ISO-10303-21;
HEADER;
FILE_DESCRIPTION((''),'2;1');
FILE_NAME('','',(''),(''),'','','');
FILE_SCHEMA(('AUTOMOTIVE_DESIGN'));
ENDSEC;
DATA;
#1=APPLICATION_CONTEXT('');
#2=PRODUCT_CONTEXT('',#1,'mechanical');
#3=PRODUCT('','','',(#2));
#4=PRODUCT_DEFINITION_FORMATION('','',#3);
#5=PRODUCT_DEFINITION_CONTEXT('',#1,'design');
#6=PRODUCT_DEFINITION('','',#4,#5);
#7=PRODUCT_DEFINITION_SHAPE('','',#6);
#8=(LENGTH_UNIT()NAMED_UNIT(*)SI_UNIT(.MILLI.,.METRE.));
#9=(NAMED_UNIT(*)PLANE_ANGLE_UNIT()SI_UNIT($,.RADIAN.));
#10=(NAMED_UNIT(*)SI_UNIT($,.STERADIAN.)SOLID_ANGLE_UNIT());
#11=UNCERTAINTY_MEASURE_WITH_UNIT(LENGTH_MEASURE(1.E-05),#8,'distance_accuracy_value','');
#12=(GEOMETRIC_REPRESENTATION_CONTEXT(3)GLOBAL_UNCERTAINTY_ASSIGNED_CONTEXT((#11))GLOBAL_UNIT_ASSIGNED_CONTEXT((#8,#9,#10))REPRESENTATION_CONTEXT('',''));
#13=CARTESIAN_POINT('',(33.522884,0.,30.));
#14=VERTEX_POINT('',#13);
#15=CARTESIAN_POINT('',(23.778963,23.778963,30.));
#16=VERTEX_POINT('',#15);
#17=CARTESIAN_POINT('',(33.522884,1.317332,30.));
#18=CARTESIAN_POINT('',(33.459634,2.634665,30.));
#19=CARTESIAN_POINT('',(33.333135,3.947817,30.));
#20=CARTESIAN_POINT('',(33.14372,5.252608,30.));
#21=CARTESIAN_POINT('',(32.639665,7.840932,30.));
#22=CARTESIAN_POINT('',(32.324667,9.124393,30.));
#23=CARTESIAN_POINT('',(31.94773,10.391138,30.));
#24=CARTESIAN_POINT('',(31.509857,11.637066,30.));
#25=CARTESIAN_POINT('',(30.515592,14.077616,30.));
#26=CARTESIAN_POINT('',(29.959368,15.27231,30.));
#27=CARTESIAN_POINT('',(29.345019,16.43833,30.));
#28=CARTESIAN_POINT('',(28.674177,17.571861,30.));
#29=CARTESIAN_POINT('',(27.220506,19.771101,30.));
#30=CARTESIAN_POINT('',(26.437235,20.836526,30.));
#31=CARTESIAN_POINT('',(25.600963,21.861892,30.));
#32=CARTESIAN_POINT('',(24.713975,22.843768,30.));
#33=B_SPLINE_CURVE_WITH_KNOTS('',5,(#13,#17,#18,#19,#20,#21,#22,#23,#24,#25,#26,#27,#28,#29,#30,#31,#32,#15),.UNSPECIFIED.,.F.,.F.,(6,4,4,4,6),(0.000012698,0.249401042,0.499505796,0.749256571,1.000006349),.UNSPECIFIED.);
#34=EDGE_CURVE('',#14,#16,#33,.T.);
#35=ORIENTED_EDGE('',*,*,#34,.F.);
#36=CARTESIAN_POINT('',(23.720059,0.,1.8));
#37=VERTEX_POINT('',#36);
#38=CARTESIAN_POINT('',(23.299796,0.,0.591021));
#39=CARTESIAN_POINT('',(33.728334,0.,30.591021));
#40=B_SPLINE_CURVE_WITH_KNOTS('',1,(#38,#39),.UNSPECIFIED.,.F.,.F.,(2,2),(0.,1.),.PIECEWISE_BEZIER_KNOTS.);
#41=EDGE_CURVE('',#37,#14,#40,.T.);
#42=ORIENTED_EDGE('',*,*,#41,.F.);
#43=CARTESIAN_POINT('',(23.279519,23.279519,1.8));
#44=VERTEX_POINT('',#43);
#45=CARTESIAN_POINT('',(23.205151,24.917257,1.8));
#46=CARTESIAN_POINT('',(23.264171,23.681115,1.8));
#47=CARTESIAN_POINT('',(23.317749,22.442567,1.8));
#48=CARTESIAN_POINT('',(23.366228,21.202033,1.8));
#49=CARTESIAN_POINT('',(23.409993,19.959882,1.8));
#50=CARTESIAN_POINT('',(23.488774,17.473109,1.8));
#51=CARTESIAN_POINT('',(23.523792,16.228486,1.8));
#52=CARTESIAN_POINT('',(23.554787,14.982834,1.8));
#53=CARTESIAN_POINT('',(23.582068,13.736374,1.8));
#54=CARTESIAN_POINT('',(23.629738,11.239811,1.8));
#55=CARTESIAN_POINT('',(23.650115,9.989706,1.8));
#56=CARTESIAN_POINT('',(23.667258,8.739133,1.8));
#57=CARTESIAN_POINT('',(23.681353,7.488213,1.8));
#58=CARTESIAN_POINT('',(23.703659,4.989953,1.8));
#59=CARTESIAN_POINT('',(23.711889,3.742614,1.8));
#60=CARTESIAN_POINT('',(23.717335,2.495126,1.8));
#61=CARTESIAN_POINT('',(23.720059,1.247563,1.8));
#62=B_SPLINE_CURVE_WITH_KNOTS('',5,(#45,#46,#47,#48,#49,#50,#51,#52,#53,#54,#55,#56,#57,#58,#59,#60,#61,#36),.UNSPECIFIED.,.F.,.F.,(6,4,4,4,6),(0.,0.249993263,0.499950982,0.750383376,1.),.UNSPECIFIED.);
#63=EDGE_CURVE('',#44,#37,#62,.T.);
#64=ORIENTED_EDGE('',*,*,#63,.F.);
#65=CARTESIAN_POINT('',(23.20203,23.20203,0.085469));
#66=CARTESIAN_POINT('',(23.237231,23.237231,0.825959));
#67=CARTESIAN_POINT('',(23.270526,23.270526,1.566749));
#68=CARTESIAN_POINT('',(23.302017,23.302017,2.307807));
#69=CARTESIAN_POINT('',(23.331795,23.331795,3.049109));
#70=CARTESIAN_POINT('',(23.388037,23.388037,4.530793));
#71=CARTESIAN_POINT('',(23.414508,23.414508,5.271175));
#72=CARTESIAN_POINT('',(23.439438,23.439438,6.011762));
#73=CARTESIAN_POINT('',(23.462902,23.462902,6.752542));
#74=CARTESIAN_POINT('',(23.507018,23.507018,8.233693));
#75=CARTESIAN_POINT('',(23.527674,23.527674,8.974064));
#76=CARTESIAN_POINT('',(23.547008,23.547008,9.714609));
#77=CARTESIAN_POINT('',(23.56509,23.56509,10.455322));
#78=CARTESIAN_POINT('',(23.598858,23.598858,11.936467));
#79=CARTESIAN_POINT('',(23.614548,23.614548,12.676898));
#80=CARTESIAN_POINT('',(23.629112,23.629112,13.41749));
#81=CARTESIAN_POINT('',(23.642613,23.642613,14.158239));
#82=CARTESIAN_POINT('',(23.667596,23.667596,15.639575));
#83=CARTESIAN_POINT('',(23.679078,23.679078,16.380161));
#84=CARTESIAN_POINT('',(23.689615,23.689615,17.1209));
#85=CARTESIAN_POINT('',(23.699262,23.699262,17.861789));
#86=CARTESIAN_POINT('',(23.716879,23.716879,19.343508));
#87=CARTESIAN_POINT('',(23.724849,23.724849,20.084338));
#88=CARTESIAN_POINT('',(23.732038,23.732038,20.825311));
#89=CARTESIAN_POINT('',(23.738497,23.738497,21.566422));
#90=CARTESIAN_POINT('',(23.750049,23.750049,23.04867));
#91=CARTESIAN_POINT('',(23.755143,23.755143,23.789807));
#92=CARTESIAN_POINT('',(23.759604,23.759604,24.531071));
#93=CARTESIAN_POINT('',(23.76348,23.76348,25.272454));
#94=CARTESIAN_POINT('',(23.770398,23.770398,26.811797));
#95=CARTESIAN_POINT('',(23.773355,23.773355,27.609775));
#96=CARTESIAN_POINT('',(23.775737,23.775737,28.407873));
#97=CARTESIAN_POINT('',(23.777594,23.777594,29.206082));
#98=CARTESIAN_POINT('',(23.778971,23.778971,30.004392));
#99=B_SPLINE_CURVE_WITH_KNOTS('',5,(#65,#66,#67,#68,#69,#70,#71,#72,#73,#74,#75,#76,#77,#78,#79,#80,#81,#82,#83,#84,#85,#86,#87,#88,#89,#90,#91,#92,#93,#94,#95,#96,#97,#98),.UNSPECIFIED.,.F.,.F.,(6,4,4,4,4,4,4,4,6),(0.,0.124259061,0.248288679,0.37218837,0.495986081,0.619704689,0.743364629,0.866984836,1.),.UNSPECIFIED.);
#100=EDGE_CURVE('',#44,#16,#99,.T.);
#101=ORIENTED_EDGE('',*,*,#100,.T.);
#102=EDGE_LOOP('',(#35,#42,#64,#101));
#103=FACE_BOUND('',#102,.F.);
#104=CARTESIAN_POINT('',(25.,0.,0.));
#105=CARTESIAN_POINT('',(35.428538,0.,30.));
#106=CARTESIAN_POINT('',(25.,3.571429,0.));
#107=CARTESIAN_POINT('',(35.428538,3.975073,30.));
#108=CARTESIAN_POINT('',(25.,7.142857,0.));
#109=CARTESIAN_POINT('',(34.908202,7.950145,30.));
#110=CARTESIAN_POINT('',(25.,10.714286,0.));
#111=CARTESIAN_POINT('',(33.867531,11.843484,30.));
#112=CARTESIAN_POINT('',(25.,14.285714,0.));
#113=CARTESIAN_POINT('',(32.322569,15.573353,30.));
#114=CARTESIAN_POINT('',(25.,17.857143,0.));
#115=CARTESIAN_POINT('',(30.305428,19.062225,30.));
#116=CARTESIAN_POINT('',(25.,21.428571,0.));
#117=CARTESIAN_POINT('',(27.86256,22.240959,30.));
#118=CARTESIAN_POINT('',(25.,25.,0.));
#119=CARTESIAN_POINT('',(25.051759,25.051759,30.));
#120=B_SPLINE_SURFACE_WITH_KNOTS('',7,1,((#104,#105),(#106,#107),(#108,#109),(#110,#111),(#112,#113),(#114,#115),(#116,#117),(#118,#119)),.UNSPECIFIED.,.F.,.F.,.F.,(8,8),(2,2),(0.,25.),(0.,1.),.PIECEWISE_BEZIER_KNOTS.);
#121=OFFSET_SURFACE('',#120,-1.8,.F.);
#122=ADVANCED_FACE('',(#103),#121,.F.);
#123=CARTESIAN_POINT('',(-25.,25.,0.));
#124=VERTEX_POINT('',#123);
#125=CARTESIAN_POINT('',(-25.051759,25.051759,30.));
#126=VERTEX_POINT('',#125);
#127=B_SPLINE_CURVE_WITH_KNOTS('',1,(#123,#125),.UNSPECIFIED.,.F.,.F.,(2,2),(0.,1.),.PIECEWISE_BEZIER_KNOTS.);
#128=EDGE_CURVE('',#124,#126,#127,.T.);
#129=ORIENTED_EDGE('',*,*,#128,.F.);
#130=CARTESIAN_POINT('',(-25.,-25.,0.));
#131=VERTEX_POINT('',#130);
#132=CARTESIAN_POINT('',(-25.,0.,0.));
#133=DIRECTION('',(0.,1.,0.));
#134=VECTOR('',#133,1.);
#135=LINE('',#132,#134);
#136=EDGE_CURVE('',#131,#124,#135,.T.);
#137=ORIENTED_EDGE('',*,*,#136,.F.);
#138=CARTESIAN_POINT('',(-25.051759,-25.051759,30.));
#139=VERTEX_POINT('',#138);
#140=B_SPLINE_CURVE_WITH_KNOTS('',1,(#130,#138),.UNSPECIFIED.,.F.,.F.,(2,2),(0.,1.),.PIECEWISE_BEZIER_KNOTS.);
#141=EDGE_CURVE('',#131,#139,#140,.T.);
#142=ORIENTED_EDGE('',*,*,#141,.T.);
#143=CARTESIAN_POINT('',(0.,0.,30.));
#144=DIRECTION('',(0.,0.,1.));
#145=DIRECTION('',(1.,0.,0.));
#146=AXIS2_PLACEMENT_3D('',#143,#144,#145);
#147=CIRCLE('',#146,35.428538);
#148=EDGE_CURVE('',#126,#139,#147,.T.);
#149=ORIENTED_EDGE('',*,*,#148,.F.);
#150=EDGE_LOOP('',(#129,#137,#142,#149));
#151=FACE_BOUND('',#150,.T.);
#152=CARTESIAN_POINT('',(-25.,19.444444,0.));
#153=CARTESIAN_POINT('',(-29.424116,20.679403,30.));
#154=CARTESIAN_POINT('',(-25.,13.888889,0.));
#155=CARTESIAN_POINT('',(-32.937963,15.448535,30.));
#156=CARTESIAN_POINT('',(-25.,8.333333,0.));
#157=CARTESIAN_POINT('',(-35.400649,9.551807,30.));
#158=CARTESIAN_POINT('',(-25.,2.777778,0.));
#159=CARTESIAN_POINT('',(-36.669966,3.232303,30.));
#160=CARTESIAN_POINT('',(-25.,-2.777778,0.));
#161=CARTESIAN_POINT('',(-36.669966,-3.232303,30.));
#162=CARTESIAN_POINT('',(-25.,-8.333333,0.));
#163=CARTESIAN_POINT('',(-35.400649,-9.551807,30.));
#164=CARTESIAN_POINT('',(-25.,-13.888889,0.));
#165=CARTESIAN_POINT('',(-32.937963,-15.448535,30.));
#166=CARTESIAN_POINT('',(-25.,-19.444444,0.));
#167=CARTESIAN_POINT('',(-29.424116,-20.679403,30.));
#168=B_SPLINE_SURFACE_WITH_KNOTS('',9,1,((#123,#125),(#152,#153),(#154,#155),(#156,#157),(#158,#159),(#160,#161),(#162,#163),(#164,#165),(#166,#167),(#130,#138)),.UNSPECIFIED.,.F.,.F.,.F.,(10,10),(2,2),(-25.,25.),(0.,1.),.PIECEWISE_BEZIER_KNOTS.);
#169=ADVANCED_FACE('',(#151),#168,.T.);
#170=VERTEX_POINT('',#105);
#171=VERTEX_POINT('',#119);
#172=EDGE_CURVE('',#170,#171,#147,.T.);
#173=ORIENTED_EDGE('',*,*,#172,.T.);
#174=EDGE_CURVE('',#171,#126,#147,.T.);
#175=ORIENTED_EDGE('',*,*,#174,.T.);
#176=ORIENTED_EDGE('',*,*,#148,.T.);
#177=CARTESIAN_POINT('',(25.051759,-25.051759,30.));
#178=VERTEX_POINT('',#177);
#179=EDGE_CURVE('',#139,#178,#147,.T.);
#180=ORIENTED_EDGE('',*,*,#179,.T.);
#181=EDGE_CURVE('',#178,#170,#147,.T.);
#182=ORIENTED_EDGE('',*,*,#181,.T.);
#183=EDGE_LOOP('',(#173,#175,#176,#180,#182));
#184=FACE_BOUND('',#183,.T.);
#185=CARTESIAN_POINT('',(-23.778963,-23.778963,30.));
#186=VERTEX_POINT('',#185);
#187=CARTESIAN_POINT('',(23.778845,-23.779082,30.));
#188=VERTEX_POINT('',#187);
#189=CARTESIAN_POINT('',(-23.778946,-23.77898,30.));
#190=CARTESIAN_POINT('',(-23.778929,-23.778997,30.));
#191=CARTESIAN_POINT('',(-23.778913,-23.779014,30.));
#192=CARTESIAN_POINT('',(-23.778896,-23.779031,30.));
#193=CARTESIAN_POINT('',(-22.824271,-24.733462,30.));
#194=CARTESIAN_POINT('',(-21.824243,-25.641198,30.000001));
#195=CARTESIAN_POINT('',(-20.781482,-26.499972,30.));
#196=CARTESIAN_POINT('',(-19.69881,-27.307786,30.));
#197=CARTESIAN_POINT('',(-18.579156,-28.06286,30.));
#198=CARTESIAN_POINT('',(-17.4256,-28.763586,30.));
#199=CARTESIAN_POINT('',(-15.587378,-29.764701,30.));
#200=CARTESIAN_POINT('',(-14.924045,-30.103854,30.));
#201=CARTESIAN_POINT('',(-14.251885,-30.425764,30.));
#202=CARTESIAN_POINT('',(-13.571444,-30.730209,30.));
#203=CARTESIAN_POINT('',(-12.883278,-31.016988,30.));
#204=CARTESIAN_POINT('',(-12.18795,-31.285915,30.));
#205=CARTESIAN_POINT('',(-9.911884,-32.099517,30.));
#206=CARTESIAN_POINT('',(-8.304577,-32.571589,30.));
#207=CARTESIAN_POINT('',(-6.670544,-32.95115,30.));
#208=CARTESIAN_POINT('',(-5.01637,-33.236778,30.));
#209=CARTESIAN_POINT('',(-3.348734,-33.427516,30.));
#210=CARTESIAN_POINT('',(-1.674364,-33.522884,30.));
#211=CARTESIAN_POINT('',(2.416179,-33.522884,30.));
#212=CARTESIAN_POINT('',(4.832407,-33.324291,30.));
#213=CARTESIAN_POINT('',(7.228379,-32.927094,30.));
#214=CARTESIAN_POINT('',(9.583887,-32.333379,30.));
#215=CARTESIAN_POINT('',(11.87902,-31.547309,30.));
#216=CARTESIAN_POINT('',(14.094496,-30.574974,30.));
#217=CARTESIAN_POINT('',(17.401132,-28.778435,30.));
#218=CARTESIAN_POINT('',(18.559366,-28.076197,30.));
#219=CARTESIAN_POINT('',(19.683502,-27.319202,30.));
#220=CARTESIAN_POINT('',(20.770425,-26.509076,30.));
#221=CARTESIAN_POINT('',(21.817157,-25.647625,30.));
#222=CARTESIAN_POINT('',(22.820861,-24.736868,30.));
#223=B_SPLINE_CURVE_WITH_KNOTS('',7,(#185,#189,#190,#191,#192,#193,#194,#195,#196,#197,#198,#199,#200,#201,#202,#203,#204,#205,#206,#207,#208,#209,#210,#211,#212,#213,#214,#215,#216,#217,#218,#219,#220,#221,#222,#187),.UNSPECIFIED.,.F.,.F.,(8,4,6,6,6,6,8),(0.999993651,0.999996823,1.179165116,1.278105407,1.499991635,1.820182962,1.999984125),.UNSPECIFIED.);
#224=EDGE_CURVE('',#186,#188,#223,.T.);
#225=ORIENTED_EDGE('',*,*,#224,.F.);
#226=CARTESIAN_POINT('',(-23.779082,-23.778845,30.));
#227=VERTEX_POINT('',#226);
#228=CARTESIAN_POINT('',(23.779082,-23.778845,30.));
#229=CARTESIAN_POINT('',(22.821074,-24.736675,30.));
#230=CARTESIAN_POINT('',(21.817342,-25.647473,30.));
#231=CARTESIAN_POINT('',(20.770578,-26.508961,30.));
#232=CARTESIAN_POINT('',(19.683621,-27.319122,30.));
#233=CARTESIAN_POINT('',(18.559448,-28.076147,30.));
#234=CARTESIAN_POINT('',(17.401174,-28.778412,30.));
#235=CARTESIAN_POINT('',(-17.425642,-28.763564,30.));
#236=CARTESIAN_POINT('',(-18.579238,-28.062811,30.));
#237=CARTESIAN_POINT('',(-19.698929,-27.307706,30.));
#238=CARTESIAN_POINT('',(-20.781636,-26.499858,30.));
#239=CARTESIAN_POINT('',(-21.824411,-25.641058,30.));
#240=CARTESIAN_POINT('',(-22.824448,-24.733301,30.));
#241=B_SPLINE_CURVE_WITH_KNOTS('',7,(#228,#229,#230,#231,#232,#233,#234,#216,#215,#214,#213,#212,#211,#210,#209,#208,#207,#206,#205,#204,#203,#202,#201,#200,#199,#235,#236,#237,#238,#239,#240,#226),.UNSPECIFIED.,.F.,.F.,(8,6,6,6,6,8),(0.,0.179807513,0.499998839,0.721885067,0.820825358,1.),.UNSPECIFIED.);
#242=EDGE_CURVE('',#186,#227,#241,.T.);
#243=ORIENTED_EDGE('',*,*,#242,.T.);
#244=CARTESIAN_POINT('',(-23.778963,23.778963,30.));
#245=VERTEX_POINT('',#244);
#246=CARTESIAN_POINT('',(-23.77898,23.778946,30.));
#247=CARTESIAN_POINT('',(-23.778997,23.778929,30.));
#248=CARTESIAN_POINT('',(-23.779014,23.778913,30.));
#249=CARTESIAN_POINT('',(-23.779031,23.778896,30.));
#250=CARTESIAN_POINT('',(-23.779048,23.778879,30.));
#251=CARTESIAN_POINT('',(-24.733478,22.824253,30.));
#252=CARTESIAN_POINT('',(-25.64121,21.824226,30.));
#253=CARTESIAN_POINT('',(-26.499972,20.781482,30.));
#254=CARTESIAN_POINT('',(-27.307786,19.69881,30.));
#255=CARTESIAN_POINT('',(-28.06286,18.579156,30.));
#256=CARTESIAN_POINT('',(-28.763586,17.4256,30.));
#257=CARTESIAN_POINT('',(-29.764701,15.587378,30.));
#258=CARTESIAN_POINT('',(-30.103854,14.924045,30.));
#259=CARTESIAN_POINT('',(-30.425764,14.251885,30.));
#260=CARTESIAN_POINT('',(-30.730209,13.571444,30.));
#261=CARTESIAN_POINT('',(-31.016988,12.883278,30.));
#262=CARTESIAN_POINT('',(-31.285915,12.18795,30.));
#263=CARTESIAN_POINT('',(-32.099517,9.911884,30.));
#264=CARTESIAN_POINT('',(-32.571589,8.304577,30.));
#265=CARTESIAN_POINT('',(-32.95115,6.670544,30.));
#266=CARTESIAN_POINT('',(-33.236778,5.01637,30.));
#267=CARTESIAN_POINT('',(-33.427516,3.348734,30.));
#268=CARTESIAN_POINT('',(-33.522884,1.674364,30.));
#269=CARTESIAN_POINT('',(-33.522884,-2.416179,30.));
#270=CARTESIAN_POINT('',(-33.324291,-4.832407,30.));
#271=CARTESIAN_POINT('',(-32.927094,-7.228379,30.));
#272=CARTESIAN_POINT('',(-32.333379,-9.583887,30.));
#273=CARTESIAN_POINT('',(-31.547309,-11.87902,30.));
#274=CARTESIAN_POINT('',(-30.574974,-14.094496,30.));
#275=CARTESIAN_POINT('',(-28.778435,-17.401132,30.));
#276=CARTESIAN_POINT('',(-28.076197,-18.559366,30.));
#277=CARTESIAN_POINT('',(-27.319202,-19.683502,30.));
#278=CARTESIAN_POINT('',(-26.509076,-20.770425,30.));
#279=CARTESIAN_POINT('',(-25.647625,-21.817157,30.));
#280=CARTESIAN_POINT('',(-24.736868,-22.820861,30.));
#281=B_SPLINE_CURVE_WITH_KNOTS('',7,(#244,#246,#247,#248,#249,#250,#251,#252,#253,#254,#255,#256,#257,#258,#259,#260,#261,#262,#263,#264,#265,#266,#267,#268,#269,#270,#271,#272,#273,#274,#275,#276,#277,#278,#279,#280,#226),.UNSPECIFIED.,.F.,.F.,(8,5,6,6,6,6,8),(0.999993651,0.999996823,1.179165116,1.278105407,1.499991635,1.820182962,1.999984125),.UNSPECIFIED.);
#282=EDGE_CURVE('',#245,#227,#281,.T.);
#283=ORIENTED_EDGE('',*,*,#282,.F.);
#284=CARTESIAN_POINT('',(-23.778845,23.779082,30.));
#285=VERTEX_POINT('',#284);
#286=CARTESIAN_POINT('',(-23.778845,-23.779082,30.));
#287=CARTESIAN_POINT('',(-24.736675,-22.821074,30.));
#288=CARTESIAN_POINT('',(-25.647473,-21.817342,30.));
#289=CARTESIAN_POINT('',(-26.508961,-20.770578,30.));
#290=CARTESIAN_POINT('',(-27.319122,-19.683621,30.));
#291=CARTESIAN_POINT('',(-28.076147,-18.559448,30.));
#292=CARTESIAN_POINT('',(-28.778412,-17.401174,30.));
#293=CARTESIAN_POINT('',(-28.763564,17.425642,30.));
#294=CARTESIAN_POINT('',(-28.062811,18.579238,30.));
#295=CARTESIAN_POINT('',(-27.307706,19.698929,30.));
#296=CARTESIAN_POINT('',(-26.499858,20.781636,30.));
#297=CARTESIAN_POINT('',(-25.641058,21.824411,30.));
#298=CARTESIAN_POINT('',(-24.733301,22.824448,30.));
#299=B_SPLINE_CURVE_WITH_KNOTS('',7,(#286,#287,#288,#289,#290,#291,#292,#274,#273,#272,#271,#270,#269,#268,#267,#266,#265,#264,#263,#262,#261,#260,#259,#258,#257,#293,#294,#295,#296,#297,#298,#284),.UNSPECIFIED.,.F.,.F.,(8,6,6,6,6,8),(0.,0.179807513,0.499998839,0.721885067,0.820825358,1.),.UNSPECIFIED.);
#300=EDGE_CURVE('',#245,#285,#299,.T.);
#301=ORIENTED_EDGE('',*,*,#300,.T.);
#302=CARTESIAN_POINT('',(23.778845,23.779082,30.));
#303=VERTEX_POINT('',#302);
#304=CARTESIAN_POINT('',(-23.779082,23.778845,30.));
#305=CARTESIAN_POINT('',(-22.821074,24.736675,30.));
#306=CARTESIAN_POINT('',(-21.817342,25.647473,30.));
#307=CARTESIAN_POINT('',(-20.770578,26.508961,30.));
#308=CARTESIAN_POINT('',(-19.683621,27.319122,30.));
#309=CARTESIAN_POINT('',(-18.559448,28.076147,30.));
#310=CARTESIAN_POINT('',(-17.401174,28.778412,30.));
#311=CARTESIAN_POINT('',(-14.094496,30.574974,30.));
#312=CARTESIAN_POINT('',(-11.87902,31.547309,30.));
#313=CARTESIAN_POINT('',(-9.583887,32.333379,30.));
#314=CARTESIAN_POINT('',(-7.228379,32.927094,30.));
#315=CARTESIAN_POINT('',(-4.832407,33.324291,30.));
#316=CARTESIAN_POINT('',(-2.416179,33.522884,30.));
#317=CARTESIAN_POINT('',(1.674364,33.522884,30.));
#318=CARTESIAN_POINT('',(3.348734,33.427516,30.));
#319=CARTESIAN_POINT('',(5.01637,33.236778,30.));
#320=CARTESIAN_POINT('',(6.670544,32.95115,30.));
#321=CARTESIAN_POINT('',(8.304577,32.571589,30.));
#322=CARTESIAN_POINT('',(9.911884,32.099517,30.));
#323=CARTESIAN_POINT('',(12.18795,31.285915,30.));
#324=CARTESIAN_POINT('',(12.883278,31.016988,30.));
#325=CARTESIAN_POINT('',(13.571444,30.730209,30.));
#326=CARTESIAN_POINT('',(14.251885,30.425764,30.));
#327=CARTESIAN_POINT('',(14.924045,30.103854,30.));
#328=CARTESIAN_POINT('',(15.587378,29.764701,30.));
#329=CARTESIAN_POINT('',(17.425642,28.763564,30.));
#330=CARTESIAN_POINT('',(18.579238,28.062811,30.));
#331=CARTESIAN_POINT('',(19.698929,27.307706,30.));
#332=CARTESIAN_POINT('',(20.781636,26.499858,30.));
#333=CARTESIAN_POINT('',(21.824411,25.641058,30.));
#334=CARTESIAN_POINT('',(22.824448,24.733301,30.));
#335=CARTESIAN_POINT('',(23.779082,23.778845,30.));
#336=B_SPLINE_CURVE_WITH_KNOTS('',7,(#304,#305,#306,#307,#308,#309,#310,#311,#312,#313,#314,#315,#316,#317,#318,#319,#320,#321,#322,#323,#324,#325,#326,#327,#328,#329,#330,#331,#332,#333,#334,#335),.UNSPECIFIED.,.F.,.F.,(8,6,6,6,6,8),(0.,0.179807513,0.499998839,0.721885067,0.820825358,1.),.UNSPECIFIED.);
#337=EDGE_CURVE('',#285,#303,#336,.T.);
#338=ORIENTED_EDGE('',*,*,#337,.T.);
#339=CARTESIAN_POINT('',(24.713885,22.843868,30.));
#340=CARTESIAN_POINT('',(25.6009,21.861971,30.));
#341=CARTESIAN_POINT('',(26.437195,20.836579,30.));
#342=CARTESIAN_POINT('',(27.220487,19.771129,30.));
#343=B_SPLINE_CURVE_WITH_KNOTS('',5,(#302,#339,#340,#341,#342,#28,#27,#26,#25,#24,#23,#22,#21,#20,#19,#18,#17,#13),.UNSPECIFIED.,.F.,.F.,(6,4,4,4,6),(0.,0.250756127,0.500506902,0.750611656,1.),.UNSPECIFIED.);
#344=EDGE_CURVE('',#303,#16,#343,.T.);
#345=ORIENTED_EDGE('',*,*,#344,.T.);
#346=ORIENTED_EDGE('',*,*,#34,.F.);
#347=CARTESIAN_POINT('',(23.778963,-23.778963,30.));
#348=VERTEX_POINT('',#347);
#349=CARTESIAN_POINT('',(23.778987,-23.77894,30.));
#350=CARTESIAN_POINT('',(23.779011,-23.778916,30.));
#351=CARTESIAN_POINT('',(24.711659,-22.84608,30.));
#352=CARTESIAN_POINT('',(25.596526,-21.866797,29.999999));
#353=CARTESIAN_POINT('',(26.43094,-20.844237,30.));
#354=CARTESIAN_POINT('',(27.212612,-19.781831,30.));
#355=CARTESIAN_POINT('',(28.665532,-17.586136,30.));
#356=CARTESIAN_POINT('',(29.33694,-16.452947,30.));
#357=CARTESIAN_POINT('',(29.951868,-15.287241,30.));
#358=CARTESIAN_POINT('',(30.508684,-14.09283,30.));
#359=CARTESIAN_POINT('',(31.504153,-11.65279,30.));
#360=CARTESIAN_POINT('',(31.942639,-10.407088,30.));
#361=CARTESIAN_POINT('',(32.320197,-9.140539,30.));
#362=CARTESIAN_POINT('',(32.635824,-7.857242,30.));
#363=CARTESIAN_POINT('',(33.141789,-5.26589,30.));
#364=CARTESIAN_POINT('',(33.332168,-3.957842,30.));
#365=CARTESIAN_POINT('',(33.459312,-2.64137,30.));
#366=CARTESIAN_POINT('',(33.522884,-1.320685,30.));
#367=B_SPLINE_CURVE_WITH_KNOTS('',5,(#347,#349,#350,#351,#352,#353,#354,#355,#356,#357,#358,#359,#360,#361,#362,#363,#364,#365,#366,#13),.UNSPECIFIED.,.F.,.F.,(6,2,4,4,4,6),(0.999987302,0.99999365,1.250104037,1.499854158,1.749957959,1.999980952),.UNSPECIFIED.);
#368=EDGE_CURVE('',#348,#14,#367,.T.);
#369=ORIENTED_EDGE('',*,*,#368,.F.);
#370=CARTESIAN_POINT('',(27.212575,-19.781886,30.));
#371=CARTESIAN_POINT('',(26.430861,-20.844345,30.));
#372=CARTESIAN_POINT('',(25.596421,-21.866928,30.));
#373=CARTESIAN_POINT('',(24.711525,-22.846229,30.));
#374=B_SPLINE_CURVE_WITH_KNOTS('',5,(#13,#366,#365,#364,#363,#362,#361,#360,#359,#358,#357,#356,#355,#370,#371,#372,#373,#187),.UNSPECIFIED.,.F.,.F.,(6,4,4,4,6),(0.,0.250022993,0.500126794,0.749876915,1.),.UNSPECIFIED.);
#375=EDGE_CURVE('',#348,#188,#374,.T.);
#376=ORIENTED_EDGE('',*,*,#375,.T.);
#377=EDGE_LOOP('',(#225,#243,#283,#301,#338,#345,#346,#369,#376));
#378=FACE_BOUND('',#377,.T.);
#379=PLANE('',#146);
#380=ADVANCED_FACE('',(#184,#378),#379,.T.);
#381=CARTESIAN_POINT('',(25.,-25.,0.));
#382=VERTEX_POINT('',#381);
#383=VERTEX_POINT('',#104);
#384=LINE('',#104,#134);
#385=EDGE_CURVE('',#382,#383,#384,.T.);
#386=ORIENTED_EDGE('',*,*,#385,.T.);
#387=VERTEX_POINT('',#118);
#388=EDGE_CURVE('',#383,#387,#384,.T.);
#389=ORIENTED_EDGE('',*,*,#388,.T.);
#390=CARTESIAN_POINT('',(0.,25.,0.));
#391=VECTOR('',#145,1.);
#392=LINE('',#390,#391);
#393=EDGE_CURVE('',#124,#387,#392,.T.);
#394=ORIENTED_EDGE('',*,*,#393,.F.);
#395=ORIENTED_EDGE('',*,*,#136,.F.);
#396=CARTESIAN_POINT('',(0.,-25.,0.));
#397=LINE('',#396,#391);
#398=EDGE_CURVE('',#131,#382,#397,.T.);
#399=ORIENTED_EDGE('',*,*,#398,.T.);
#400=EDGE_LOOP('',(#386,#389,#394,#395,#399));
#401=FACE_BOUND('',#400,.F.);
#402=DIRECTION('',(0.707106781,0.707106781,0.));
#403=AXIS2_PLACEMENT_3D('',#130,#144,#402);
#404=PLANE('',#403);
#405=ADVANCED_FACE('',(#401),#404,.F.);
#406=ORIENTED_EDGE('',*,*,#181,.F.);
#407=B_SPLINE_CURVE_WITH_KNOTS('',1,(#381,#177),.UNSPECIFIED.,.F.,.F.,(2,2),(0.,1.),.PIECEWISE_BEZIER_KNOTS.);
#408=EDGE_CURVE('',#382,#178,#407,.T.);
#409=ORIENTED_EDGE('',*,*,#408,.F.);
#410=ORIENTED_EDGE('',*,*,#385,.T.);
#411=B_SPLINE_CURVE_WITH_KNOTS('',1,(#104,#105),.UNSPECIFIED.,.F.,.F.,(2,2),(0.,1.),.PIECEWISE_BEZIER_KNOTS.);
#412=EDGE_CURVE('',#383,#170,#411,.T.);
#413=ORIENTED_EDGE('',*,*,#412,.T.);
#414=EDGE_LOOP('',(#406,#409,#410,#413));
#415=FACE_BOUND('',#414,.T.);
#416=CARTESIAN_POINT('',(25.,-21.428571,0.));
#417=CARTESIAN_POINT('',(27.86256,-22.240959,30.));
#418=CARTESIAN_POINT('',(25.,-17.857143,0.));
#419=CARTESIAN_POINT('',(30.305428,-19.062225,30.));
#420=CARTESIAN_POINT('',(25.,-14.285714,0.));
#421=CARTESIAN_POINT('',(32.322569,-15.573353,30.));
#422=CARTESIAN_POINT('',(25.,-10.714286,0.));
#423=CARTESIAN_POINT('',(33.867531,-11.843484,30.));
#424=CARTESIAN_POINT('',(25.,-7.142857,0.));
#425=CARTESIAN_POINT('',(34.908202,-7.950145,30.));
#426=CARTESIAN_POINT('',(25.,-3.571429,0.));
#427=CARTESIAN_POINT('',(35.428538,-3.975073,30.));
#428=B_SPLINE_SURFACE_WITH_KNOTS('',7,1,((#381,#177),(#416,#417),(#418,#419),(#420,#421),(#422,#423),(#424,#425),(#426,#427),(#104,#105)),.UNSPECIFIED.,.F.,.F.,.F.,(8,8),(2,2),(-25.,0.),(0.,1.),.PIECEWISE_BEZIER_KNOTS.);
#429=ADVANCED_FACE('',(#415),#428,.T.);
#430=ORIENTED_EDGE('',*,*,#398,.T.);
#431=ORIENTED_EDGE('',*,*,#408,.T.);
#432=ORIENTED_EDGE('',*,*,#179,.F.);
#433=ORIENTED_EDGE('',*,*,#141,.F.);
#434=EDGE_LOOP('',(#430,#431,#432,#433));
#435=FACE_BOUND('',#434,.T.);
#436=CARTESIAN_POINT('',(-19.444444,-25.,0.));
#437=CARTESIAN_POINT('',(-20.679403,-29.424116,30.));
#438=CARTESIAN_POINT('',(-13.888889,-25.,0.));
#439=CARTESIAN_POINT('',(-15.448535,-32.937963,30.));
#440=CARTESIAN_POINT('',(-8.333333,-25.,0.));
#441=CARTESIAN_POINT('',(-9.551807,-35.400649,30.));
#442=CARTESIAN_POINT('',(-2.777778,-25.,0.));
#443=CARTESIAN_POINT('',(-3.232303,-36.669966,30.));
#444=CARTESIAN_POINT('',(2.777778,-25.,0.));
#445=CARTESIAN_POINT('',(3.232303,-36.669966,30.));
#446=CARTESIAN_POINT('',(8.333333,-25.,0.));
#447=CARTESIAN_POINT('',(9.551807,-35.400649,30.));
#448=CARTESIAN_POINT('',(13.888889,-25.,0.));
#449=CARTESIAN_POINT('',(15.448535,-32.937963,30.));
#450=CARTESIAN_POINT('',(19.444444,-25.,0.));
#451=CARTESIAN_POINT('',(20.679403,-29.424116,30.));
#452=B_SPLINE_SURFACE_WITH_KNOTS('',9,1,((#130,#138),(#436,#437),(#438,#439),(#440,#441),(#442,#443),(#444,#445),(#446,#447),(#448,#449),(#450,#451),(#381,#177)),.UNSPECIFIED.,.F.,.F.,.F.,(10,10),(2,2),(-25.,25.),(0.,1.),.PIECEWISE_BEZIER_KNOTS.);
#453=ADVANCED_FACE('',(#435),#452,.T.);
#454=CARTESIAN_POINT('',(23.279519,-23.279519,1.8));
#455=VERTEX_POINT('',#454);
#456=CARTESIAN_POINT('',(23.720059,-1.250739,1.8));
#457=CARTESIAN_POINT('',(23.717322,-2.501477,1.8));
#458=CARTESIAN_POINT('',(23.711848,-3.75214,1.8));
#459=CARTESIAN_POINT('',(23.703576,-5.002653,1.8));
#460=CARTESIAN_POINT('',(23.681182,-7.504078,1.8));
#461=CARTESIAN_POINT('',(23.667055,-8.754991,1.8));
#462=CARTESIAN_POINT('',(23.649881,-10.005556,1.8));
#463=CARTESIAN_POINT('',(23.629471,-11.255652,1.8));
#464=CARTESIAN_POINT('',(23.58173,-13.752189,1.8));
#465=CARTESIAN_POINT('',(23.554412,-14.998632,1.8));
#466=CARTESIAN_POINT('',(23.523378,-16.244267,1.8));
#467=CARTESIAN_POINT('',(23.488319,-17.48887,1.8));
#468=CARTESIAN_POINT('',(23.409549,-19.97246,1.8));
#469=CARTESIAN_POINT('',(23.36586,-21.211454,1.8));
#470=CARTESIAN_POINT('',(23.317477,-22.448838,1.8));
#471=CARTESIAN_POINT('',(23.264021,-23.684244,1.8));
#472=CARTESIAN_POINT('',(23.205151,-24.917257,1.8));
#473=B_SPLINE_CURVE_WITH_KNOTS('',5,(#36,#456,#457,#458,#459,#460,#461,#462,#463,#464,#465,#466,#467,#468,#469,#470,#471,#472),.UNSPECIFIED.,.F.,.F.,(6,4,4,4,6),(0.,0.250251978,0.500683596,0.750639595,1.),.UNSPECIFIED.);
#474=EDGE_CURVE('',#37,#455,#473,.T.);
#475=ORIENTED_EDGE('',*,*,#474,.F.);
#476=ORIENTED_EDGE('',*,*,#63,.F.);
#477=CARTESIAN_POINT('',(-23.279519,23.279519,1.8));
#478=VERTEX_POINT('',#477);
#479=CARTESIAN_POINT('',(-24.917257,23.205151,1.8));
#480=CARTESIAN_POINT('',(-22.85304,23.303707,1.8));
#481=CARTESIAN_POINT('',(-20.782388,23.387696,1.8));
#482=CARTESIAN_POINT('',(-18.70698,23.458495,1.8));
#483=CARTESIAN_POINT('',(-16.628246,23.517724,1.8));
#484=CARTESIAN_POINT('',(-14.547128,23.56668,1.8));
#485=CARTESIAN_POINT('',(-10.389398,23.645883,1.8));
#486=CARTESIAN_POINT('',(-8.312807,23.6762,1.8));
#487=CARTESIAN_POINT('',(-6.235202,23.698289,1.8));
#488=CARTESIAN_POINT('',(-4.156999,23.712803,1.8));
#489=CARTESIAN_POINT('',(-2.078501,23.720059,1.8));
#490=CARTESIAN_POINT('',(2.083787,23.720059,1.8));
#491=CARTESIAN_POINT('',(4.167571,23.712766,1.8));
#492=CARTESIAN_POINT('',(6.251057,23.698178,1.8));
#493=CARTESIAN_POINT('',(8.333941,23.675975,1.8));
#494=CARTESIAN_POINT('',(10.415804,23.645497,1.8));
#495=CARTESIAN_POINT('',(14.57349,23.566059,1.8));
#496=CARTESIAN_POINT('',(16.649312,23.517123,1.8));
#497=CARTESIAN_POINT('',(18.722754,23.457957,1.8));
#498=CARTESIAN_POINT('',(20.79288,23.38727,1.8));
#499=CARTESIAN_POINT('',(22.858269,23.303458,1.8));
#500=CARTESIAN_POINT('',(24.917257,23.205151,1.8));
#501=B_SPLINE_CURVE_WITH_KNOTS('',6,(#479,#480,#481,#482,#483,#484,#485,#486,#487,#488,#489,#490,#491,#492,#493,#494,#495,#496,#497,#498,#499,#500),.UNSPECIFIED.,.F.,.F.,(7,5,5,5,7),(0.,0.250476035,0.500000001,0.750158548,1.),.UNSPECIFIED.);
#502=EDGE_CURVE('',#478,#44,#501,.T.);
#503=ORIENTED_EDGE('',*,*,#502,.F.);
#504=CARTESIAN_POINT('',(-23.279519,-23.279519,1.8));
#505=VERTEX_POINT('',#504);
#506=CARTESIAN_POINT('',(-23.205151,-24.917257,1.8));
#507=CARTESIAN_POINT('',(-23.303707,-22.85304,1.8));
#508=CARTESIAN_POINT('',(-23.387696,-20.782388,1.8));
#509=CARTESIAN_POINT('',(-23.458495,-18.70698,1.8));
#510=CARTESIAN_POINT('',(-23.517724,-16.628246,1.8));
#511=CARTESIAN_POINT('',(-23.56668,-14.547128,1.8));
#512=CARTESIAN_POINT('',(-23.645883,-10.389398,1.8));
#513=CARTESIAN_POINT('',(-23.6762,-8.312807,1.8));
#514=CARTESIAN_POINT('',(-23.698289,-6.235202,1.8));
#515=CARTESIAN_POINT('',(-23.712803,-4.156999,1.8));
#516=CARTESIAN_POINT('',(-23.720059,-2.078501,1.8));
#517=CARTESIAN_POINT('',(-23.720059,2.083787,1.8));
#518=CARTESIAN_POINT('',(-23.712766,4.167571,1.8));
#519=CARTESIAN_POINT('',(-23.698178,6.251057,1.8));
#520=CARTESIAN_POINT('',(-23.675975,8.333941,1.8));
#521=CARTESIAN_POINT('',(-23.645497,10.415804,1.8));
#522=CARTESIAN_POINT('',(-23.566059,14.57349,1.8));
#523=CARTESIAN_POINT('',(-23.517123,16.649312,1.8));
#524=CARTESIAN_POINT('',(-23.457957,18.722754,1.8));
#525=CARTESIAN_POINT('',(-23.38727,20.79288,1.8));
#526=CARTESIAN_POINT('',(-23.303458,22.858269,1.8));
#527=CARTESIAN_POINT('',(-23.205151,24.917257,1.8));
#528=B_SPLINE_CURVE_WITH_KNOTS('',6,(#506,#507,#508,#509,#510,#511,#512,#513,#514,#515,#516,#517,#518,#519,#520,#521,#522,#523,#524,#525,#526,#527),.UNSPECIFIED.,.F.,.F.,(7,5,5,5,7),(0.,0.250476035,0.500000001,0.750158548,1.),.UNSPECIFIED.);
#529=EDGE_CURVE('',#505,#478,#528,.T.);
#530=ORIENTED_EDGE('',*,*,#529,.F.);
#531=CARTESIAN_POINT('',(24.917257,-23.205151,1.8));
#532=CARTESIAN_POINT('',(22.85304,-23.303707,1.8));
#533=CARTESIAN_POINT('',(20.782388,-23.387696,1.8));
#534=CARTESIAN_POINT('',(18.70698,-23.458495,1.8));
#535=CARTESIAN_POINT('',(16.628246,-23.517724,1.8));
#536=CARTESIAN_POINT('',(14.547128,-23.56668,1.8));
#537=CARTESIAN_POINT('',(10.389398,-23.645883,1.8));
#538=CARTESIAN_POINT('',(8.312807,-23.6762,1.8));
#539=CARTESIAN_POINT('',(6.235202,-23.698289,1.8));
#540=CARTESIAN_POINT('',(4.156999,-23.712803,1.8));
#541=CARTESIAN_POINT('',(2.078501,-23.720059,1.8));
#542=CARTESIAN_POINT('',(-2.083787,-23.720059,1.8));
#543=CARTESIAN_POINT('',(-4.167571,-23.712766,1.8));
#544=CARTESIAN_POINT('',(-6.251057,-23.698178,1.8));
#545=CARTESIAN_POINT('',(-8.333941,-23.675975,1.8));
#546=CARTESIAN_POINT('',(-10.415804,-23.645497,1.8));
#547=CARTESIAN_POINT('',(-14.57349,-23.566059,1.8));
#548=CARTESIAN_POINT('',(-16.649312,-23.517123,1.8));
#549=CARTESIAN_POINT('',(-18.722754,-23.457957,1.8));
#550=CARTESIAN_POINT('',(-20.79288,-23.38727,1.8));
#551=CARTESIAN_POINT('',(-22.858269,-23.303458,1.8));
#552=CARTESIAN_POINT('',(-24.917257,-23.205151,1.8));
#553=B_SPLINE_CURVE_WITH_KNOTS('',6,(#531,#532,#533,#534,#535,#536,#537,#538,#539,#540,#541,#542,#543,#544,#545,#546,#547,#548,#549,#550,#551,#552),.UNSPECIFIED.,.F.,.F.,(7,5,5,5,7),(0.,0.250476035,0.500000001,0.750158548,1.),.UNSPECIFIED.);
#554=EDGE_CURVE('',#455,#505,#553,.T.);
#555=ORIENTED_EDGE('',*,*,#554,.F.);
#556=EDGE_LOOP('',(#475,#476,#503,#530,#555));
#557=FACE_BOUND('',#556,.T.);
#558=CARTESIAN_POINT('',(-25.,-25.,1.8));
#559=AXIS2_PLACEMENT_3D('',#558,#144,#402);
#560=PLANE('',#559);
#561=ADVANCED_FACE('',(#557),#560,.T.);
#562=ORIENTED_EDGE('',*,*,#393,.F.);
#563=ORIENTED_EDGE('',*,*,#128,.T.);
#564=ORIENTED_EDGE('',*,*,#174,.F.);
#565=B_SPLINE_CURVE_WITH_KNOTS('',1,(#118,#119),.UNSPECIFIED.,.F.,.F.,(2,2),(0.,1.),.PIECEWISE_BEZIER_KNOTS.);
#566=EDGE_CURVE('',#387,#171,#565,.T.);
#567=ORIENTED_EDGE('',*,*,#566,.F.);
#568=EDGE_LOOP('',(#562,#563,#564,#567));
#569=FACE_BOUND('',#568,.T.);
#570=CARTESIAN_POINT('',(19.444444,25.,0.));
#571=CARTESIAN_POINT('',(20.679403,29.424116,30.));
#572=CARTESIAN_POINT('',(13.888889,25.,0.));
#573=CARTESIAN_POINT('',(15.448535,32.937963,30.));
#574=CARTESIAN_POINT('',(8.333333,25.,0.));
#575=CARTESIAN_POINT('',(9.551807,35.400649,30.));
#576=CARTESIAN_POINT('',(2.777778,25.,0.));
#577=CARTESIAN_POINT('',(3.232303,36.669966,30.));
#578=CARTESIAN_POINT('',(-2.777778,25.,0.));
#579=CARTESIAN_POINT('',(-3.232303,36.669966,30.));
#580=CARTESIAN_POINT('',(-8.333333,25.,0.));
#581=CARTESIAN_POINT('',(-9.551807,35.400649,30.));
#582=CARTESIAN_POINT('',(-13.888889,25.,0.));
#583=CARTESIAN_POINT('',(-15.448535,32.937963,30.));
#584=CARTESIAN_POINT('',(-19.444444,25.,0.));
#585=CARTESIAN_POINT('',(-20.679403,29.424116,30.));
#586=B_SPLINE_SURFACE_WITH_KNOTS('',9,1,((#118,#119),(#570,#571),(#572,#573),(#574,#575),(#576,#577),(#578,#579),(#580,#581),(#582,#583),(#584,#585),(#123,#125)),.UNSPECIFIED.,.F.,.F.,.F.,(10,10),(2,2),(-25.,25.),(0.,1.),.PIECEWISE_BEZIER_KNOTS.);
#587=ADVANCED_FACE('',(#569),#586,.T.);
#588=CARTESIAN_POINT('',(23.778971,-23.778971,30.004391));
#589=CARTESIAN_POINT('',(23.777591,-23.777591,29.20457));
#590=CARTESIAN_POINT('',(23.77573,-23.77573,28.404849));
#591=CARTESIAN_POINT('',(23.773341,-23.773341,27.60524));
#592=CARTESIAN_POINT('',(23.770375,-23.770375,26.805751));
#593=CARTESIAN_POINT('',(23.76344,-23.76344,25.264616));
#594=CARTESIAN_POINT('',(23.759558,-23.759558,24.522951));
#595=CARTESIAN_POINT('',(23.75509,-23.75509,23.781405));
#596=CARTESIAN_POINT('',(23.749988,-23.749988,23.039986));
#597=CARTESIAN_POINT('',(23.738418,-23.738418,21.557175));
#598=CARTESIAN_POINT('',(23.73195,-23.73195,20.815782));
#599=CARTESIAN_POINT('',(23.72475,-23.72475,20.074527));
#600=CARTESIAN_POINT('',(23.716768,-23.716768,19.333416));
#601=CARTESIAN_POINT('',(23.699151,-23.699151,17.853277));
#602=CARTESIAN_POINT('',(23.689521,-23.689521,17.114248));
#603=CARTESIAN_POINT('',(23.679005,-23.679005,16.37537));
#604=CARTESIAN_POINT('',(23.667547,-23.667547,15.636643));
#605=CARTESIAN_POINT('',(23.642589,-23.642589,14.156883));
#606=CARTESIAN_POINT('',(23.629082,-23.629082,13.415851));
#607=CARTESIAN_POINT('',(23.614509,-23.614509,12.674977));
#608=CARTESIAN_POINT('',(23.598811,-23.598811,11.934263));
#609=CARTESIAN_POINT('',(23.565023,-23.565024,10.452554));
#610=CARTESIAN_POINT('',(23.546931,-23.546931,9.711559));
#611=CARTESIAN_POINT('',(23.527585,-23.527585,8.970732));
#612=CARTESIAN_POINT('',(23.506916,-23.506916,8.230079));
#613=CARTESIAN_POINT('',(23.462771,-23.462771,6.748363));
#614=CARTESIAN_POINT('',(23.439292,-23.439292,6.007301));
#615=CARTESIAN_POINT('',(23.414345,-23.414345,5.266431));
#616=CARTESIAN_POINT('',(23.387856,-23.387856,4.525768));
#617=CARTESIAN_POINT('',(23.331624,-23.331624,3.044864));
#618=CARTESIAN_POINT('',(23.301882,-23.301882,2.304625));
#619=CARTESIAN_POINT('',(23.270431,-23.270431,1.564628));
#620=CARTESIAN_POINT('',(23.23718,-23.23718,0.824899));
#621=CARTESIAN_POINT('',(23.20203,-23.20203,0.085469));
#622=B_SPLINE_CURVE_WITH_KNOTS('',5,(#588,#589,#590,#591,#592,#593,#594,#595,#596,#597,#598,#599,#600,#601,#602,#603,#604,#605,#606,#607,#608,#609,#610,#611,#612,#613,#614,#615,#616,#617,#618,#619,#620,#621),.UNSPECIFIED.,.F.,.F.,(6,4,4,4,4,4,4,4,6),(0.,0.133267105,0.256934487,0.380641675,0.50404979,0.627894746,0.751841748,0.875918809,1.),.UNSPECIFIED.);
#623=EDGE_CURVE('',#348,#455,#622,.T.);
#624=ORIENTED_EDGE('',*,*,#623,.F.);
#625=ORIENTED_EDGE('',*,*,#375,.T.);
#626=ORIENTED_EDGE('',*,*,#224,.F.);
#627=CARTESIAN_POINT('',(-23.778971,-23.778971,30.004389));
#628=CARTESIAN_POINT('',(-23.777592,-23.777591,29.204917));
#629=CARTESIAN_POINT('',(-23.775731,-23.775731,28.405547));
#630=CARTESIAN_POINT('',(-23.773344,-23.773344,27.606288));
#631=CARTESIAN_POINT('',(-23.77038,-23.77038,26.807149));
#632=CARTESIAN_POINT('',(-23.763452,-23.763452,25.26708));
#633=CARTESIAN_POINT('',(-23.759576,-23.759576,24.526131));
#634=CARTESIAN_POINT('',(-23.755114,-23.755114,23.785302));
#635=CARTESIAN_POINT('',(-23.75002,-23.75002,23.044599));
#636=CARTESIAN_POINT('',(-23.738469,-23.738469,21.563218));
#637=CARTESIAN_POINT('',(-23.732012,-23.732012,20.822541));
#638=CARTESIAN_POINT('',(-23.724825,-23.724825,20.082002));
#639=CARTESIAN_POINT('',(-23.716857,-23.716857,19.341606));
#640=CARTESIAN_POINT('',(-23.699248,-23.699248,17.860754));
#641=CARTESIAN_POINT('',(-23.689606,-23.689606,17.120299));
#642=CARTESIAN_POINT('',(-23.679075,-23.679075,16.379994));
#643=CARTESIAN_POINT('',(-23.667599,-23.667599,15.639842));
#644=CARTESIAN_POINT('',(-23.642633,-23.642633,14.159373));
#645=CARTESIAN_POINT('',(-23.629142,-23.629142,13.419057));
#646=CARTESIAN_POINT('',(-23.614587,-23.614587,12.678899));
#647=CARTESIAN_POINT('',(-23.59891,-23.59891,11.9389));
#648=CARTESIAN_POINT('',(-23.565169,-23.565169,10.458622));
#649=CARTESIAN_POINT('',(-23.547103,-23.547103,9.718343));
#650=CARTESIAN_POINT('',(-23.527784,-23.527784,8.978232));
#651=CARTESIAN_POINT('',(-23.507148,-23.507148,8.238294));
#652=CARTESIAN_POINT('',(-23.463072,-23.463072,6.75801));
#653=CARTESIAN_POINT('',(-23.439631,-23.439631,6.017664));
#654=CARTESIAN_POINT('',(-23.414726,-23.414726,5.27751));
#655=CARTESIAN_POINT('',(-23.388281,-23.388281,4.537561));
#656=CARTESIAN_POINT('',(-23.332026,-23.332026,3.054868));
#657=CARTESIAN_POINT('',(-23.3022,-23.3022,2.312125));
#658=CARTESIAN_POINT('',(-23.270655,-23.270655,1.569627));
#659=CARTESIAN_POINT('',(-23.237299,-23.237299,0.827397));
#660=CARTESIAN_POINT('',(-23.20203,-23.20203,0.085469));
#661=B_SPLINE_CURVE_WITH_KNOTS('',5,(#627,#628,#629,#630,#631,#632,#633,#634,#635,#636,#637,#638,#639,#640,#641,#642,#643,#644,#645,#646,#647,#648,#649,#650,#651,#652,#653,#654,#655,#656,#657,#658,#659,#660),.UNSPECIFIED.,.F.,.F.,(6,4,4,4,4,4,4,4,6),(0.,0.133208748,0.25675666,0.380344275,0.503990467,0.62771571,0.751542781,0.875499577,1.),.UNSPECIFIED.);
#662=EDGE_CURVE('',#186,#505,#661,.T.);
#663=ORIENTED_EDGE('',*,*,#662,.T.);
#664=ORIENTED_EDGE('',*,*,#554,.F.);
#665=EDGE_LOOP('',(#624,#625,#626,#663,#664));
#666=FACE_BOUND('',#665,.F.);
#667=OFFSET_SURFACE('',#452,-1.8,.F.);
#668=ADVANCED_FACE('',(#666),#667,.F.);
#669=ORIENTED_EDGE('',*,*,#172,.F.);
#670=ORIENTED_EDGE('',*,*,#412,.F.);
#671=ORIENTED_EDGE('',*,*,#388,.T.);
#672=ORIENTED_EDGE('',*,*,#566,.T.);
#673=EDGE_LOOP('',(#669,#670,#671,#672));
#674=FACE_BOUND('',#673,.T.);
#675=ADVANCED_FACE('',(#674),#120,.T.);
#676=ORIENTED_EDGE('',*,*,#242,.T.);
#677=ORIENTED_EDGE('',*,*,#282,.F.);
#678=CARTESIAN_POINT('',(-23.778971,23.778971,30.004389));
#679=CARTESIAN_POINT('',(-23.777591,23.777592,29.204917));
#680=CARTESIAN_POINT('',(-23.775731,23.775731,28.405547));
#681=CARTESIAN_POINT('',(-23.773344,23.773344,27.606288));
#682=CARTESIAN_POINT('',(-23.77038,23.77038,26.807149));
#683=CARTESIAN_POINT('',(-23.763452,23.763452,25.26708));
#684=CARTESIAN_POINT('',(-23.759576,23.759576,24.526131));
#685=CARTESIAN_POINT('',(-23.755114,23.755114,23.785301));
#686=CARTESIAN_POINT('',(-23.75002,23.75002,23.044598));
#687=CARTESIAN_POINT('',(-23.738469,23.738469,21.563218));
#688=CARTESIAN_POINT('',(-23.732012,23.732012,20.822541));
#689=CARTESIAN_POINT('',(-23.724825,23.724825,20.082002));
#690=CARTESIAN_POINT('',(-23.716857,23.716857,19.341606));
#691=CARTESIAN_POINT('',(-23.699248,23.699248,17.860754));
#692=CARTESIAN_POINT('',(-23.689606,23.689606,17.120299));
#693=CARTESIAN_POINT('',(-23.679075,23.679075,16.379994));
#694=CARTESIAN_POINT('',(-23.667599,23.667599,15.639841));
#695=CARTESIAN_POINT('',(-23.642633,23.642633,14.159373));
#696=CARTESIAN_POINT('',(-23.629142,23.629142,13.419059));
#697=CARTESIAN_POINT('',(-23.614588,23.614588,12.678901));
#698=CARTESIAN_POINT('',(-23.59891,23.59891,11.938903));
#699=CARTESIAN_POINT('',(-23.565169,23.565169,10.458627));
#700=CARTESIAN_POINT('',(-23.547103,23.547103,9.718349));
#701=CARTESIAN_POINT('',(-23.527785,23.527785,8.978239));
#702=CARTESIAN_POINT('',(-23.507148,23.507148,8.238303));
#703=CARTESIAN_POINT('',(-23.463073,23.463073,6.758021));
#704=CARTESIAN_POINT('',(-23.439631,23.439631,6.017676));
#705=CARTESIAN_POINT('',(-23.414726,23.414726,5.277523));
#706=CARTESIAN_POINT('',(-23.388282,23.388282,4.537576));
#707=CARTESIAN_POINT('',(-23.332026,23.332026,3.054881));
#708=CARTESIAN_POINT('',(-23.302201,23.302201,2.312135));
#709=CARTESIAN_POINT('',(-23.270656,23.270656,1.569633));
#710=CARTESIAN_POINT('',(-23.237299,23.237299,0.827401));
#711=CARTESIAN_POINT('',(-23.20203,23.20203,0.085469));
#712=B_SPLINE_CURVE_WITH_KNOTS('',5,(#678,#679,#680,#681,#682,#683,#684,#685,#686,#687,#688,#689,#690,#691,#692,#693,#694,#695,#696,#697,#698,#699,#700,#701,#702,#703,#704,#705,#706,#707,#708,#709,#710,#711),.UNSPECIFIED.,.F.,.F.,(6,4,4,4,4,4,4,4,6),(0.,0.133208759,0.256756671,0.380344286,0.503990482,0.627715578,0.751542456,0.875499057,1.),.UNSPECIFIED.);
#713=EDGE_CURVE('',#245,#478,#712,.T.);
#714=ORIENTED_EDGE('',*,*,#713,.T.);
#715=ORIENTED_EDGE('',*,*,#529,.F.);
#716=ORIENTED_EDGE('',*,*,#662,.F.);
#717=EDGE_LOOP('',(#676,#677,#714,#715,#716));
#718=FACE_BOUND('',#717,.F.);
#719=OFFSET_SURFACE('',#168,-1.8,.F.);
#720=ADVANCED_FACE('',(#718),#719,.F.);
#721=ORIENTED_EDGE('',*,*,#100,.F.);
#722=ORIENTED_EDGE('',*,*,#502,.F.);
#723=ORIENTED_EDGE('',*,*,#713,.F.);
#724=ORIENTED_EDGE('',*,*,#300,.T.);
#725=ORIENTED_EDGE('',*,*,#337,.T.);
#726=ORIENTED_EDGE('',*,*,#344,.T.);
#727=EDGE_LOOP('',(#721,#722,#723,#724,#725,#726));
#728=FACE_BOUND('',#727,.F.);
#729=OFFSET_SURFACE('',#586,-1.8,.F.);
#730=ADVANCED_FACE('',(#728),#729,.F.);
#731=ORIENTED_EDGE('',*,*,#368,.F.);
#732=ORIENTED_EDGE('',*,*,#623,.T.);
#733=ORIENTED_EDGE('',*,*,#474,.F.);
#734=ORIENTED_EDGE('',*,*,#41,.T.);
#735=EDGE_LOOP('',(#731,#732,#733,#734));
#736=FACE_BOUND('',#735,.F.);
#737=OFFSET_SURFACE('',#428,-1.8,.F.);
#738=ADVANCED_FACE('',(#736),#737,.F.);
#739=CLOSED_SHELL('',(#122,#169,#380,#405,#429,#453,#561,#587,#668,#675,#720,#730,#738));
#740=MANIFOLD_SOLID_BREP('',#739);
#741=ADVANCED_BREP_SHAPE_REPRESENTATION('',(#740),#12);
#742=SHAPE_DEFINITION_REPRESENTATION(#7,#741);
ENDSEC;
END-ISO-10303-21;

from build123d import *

# Parameters (mm, degrees)
F0_W = 50
F0_H = 50
F2_R = 35.4285378843
F4_T = 1.8


# Not quite as in the source:
# - a shell that OpenCascade refuses in one call is made with other operations: the cavity is built on its own and cut out


with BuildPart() as f3:
    # F0 (on Top) → F3 section 0
    with BuildSketch(Plane.XY):
        Rectangle(F0_W, F0_H)
    # F2 (on offset) → F3 section 1
    with BuildSketch(Plane.XY.offset(30)):
        Circle(F2_R)
    loft()

    # F4: shell of thickness 1.8, made by hand


with BuildPart() as f4_core1:
    # F4_t2: copy of F3
    add(f3.part)

    # the walls: a layer under each face that stays
    f4_faces = [f4_core1.faces().sort_by_distance(p)[0] for p in [
        (0, 30.2142689408, 15),
        (-30.2142689408, 0, 15),
        (0, -30.2142689408, 15),
        (28.8658505055, -13.0289572392, 15),
        (28.8658505055, 13.0289572392, 15),
        (0, 0, 0),
    ]]
    thicken(f4_faces, amount=-F4_T, mode=Mode.SUBTRACT)


with BuildPart() as f3_1:
    add(f3.part)

    # what is left inside the walls is the cavity
    f4_cavity = [f4_core1.part.solids().sort_by_distance(p)[0] for p in [
        (0, -11.174295, 29.982),
    ]]
    add(f4_cavity, mode=Mode.SUBTRACT)


solid = f3_1.part
